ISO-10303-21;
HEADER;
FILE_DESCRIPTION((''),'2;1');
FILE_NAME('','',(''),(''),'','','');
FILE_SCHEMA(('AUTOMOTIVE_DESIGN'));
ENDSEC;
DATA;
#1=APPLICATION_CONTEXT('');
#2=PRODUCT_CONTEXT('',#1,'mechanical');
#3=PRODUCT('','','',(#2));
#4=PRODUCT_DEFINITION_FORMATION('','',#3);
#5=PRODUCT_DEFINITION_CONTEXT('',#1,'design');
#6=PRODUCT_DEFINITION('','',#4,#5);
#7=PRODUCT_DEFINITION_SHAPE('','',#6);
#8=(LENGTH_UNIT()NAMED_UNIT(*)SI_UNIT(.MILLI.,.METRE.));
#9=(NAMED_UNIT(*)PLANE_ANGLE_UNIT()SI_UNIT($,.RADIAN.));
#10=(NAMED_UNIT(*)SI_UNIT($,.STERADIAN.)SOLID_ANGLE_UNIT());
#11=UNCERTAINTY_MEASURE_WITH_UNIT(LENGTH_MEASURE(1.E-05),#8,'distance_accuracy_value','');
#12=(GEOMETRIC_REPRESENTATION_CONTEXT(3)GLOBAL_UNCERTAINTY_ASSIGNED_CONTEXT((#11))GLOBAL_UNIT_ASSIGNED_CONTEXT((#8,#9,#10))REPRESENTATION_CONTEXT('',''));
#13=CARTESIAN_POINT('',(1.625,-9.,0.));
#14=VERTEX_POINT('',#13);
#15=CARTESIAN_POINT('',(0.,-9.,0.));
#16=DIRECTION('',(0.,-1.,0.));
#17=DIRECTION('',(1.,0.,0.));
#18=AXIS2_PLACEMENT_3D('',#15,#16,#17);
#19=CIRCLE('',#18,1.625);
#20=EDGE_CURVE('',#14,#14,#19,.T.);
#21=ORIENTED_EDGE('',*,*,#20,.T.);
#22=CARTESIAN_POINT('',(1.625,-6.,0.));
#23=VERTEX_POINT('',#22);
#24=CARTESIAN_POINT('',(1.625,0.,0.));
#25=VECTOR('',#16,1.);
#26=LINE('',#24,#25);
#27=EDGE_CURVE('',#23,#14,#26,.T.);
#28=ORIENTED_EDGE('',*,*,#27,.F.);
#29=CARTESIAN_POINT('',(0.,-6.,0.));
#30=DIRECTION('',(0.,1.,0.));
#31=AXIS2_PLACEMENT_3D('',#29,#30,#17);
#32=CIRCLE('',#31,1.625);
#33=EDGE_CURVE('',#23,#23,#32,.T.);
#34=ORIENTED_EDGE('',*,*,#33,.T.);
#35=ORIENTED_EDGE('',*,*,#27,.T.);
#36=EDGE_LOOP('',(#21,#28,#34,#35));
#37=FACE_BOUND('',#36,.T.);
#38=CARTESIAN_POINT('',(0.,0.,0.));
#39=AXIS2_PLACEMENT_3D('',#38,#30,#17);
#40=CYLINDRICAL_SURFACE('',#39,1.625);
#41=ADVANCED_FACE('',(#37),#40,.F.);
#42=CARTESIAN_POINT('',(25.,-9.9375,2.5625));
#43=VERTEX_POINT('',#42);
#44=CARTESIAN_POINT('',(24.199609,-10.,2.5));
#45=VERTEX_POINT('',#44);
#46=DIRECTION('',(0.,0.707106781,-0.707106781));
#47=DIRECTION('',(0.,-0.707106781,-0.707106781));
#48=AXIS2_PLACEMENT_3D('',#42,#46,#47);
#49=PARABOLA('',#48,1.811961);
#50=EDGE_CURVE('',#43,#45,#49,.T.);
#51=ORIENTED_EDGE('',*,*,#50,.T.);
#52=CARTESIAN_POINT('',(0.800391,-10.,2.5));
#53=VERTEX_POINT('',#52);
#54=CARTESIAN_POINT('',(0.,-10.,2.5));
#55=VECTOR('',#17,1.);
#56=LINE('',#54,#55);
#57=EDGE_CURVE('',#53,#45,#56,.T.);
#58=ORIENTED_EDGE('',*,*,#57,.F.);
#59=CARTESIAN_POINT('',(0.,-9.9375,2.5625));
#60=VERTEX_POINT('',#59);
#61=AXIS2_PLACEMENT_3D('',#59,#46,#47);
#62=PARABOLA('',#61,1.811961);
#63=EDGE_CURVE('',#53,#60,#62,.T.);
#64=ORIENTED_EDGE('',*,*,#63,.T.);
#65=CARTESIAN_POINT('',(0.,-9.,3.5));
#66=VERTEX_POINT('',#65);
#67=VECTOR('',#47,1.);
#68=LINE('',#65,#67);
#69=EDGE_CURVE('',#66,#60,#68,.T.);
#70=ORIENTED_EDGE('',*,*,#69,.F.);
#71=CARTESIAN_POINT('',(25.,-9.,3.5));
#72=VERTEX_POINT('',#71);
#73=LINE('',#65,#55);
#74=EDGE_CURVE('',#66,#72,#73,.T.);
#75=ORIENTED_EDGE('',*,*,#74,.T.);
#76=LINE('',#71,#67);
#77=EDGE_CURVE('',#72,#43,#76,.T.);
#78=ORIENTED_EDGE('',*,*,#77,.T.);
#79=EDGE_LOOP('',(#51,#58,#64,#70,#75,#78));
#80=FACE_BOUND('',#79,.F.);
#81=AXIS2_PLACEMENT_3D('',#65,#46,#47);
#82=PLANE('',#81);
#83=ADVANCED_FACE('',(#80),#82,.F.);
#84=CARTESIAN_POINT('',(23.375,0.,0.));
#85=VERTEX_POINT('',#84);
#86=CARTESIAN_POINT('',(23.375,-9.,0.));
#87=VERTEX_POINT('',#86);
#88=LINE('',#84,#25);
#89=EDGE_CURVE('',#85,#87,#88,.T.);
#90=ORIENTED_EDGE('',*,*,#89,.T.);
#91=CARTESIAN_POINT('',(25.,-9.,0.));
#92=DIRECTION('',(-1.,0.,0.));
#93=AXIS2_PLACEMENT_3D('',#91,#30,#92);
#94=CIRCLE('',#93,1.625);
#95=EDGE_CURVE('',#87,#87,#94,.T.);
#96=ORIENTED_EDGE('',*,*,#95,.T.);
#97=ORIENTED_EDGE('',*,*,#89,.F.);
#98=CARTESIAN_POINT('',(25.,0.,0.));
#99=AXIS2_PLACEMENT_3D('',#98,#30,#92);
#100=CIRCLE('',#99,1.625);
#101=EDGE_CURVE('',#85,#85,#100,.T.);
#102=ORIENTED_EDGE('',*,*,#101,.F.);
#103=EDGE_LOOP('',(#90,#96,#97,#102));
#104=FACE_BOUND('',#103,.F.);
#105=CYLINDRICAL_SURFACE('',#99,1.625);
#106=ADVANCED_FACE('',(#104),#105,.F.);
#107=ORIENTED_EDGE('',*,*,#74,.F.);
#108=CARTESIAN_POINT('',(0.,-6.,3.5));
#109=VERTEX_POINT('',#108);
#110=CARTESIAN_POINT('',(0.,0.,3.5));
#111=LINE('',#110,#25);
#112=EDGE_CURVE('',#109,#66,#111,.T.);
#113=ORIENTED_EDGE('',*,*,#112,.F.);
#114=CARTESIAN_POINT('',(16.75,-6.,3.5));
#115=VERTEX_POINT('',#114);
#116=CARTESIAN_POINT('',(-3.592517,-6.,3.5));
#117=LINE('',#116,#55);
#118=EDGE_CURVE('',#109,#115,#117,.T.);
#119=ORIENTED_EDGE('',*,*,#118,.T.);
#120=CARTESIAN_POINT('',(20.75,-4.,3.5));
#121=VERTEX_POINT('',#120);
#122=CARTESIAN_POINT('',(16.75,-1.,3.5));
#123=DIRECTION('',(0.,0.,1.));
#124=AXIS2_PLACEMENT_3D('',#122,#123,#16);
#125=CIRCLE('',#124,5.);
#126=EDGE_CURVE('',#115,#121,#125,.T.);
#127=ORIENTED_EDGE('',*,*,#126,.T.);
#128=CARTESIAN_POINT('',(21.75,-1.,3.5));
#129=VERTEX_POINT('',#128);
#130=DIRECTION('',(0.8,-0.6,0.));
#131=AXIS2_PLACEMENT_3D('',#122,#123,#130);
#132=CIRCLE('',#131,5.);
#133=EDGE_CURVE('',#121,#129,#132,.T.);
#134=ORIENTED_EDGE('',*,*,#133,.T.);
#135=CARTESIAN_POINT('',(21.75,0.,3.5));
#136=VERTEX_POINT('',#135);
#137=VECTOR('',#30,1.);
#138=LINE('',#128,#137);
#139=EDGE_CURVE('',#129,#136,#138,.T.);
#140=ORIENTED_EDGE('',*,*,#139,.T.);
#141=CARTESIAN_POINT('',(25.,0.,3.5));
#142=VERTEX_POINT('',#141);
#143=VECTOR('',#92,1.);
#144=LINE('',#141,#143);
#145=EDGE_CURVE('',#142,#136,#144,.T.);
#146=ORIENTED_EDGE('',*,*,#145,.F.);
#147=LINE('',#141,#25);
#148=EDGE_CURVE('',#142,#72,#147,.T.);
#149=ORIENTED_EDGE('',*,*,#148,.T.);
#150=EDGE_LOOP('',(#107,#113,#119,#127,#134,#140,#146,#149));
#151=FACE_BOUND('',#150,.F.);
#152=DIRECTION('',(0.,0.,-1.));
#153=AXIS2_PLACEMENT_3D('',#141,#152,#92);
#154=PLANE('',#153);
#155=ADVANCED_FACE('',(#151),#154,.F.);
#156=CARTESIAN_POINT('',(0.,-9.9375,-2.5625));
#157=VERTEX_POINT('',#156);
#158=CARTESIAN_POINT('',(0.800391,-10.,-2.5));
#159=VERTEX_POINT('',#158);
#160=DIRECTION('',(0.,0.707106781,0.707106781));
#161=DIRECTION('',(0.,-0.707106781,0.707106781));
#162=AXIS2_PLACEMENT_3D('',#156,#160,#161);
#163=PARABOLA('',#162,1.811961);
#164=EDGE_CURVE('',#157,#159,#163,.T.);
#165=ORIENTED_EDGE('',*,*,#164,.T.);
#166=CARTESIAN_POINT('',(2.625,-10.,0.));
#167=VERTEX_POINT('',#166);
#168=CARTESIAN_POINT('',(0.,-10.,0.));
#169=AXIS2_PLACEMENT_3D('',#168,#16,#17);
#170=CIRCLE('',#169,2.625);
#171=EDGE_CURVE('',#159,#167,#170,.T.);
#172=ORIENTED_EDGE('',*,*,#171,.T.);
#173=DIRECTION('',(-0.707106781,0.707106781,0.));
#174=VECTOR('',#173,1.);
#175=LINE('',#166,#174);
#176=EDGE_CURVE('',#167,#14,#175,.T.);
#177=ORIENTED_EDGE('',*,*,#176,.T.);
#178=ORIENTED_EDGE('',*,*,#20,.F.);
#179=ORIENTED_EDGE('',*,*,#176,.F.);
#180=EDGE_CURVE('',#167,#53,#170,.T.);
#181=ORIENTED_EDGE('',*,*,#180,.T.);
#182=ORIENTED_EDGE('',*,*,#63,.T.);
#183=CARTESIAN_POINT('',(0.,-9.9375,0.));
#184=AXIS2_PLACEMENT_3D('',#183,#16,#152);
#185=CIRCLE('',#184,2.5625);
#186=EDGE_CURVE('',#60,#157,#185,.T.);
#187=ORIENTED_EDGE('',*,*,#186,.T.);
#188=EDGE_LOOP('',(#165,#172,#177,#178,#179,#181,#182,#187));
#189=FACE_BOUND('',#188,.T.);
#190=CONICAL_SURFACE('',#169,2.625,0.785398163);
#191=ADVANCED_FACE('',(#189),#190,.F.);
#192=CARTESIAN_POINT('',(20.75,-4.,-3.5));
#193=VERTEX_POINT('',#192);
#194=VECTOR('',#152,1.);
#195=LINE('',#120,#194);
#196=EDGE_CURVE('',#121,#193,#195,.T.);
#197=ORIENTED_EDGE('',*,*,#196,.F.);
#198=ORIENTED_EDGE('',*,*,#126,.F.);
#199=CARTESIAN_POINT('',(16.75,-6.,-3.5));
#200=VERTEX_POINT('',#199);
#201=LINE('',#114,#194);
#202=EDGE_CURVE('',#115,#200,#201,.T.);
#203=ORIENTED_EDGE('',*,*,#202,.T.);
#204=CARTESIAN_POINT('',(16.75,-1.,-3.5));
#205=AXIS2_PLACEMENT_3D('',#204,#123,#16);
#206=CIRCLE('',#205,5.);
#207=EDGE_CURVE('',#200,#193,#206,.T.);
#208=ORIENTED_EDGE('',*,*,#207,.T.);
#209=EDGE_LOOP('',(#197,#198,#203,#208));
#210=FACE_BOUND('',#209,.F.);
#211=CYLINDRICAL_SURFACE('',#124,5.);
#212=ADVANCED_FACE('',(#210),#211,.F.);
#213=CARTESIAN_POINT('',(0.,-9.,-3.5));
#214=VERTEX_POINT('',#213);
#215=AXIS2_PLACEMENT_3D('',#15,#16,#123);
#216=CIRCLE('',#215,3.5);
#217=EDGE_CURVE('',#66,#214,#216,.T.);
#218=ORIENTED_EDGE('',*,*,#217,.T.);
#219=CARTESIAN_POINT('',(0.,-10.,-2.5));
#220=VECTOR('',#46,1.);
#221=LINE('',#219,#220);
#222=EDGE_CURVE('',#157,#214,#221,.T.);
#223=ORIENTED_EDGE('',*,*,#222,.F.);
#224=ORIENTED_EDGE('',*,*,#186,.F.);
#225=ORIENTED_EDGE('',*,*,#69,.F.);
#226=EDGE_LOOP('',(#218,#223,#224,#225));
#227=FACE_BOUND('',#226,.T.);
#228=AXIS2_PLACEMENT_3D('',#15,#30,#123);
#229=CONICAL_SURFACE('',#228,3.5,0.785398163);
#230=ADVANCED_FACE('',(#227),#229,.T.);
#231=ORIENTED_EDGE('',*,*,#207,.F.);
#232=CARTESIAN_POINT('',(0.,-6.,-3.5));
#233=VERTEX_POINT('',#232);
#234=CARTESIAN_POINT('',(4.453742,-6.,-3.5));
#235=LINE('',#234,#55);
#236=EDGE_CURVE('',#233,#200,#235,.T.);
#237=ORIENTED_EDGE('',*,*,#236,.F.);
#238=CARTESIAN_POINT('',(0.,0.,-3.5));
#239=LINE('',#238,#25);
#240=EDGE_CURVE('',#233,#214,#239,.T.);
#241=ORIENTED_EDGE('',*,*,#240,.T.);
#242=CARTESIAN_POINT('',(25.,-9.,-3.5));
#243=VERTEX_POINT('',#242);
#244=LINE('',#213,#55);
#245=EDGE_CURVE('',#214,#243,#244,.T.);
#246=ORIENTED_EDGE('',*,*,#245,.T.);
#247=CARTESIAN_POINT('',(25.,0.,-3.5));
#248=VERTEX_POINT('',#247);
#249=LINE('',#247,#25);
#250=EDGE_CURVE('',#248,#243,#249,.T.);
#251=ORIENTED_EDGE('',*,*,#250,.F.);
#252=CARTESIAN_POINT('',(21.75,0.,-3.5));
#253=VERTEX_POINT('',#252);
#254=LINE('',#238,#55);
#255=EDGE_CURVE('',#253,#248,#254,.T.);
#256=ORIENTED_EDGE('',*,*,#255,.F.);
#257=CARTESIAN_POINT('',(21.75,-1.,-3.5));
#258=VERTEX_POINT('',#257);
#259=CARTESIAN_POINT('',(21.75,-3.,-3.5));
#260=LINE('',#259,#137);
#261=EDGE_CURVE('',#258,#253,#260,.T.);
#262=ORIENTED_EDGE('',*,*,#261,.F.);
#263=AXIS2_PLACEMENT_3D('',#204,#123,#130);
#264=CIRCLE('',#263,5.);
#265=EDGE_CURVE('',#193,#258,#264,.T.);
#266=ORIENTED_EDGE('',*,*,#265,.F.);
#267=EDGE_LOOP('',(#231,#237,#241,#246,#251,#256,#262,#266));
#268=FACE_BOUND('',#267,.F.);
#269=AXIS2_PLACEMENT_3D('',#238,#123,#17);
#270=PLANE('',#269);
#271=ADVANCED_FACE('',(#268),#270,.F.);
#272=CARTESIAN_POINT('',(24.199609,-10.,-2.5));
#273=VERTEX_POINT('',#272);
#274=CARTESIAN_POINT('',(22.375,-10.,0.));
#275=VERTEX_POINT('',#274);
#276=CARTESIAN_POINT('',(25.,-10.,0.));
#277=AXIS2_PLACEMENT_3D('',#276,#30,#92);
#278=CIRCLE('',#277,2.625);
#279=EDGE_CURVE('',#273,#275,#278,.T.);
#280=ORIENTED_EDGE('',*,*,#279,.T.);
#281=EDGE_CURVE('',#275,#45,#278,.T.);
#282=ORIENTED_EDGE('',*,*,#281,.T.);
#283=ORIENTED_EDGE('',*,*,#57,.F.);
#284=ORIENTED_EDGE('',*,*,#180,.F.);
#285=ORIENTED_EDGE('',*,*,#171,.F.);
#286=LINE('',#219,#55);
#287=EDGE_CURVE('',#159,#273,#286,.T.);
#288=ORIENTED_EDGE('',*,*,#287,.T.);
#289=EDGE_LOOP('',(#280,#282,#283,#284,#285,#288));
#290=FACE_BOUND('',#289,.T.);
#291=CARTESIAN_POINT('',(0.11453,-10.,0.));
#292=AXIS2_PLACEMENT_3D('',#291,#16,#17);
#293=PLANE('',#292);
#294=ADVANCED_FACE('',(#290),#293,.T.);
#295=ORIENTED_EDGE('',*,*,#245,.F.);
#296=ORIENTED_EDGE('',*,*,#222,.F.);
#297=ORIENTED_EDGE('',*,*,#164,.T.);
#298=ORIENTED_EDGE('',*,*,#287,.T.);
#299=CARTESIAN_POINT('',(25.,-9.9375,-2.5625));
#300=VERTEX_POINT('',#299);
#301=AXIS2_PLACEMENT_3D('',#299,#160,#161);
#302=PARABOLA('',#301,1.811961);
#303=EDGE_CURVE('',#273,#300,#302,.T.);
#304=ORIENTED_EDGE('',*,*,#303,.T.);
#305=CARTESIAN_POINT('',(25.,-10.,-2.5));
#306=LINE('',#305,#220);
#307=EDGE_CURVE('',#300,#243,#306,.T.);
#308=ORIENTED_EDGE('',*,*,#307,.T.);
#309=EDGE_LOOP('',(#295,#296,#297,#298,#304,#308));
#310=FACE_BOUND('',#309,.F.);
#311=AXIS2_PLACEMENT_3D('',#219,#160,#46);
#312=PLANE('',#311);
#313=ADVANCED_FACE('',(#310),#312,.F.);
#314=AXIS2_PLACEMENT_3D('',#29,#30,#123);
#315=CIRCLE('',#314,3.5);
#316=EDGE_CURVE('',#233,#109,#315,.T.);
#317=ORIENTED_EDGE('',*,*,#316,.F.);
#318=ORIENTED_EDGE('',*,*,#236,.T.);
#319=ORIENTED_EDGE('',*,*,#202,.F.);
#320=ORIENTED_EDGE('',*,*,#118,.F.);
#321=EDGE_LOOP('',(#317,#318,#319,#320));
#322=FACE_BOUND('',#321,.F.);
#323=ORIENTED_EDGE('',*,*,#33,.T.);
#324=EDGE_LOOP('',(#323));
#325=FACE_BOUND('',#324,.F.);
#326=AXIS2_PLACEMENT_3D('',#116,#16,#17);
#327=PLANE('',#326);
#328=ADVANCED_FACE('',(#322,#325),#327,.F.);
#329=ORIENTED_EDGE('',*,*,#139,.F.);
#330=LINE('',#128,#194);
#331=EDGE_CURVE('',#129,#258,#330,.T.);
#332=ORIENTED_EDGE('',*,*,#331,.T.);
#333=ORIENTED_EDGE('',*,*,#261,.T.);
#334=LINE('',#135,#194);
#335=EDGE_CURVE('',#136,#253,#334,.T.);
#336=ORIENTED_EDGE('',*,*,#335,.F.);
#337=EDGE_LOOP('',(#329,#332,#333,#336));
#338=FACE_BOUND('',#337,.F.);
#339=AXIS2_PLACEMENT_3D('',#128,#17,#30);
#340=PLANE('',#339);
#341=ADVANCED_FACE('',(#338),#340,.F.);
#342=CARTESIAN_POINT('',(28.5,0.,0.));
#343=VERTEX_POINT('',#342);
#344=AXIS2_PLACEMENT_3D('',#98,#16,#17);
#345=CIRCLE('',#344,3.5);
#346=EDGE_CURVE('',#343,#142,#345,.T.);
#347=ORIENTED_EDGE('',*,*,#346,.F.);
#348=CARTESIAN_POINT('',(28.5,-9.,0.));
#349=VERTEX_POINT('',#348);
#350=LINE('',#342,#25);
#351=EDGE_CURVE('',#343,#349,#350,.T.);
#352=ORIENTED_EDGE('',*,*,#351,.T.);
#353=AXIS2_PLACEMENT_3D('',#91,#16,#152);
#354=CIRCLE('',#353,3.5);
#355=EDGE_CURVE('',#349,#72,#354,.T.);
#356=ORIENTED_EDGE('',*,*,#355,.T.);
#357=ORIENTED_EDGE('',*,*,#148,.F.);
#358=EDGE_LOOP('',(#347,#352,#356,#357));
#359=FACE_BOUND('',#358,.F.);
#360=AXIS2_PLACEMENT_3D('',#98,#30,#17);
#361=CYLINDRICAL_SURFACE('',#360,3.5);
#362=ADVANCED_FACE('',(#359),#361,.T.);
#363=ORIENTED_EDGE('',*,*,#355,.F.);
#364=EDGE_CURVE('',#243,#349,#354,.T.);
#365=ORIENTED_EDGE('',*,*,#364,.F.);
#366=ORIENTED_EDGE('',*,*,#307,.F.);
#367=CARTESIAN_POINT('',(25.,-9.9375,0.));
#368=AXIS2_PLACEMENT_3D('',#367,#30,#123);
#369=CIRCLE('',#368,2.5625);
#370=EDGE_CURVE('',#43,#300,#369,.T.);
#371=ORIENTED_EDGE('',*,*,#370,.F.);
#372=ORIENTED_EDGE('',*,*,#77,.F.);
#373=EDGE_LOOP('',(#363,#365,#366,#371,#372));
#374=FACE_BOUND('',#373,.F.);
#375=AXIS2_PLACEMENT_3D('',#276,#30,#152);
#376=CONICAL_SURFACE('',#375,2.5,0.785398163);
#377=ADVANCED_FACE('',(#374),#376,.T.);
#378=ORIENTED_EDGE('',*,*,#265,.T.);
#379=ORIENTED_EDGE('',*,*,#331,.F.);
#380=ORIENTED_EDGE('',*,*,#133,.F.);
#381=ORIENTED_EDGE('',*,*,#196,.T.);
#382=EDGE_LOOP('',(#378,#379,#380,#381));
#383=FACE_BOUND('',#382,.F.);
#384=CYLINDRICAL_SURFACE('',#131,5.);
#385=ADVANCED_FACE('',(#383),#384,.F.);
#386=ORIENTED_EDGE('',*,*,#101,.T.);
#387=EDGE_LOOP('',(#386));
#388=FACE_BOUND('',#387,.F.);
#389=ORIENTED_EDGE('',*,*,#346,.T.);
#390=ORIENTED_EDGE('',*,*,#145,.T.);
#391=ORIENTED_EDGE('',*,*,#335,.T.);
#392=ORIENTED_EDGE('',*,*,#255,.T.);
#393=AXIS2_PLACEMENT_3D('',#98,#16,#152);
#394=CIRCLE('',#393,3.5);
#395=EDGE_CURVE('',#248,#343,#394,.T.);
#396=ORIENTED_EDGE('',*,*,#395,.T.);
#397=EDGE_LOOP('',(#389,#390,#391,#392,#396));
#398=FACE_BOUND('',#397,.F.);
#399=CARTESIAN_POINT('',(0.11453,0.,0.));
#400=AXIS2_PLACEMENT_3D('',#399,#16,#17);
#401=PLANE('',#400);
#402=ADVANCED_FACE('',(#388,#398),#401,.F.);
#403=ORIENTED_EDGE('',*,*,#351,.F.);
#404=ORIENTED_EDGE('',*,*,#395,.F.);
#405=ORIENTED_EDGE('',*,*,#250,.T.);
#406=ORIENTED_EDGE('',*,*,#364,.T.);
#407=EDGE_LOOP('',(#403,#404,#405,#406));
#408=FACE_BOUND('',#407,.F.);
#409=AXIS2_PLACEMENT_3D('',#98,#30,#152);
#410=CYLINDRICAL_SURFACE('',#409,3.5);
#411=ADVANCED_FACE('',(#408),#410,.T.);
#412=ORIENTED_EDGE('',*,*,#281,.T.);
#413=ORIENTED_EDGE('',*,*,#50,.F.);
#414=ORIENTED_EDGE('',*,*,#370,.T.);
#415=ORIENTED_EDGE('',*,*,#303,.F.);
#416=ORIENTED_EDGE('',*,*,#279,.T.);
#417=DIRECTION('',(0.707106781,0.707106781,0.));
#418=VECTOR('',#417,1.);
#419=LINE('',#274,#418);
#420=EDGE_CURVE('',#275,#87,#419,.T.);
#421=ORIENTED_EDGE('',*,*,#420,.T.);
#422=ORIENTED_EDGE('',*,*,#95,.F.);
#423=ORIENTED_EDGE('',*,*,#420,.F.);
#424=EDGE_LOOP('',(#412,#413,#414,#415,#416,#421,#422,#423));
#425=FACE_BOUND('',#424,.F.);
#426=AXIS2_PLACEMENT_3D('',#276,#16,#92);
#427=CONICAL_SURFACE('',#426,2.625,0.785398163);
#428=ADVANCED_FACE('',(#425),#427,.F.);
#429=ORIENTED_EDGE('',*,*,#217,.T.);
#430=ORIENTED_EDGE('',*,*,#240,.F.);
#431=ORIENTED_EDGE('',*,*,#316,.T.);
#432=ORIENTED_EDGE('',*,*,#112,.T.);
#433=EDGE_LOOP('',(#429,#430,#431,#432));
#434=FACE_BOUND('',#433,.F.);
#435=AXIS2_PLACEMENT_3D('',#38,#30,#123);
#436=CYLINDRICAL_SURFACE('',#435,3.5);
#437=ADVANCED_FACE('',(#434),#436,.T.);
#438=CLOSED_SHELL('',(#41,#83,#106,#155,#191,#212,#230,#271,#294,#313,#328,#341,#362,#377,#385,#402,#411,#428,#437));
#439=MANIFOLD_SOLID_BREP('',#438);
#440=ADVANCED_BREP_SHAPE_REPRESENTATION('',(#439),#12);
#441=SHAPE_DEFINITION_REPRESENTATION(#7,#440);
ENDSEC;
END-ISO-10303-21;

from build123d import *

# Parameters (mm, degrees)
F0_R        = 1.625
F1_DEPTH    = 10
F2_W        = 7.875
F2_H        = 2
F2_H_2      = 4
F2_W_2      = 3.5925165284
F1_FACE1_W  = 25
F1_FACE1_H  = 10
F3_DEPTH    = 25
F4_T1_DEPTH = 25
F4_T4_ANGLE = 180
F4_T6_ANGLE = 180


# Not quite as in the source:
# - a fillet or chamfer that OpenCascade refuses, or shapes differently, is made with other operations: its cross-section is extruded or revolved along the edge and cut away or added


with BuildPart() as f1:
    # F0 (on Front) → F1 (new body)
    with BuildSketch(Plane.XZ):
        with BuildLine():
            ThreePointArc((0, -3.5), (2.4748737342, -2.4748737342), (3.5, 0))
            ThreePointArc((3.5, 0), (2.4748737342, 2.4748737342), (0, 3.5))
            ThreePointArc((0, 3.5), (-3.5, 0), (0, -3.5))
        make_face()
        Circle(F0_R, mode=Mode.SUBTRACT)
        with BuildLine():
            ThreePointArc((0, 3.5), (2.4748737342, 2.4748737342), (3.5, 0))
            Line((3.5, 0), (21.5, 0))
            ThreePointArc((21.5, 0), (22.5251262658, 2.4748737342), (25, 3.5))
            Line((25, 3.5), (0, 3.5))
        make_face()
        with BuildLine():
            Line((21.5, 0), (3.5, 0))
            ThreePointArc((3.5, 0), (2.4748737342, -2.4748737342), (0, -3.5))
            Line((0, -3.5), (25, -3.5))
            ThreePointArc((25, -3.5), (22.5251262658, -2.4748737342), (21.5, 0))
        make_face()
        with BuildLine():
            ThreePointArc((25, 3.5), (22.5251262658, 2.4748737342), (21.5, 0))
            ThreePointArc((21.5, 0), (22.5251262658, -2.4748737342), (25, -3.5))
            ThreePointArc((25, -3.5), (27.4748737342, -2.4748737342), (28.5, 0))
            ThreePointArc((28.5, 0), (27.4748737342, 2.4748737342), (25, 3.5))
        make_face()
        with BuildLine():
            ThreePointArc((26.625, 0), (25, -1.625), (23.375, 0))
            ThreePointArc((23.375, 0), (25, 1.625), (26.625, 0))
        make_face(mode=Mode.SUBTRACT)
    extrude(amount=F1_DEPTH)

    # F2 (on face) + F1_face1 (on face) → F3 (cut)
    with BuildSketch(Plane.XY.offset(3.5)):
        with Locations((3.9375, -5)):
            Rectangle(F2_W, F2_H)
        with Locations((3.9375, -2)):
            Rectangle(F2_W, F2_H_2)
        with Locations((11.8125, -5)):
            Rectangle(F2_W, F2_H)
        with Locations((-1.7962582642, -2)):
            Rectangle(F2_W_2, F2_H_2)
        with Locations((-1.7962582642, -5)):
            Rectangle(F2_W_2, F2_H)
        with Locations((11.8125, -2)):
            Rectangle(F2_W, F2_H_2)
        with BuildLine():
            Line((21.75, 0), (15.75, 0))
            Line((15.75, 0), (15.75, -4))
            Line((15.75, -4), (20.75, -4))
            ThreePointArc((20.75, -4), (21.4934164903, -2.5811388301), (21.75, -1))
            Line((21.75, -1), (21.75, 0))
        make_face()
        with BuildLine():
            Line((20.75, -4), (15.75, -4))
            Line((15.75, -4), (15.75, -6))
            Line((15.75, -6), (16.75, -6))
            ThreePointArc((16.75, -6), (18.9860679775, -5.472135955), (20.75, -4))
        make_face()
    with BuildSketch(Plane(origin=(12.5, -5, -3.5), x_dir=(1, 0, 0), z_dir=(0, 0, -1))):
        Rectangle(F1_FACE1_W, F1_FACE1_H)
    extrude(amount=-F3_DEPTH, dir=(0, 0, 1), mode=Mode.SUBTRACT)

    # F4: chamfer of 1 on 6 edges, made by hand

    # F4_s2 → F4_t1 (cut)
    with BuildSketch(Plane.YZ):
        Polygon((-9, 3.5), (-10, 2.5), (-10, 3.5), align=None)
        Polygon((-10, -2.5), (-9, -3.5), (-10, -3.5), align=None)
    extrude(amount=F4_T1_DEPTH, mode=Mode.SUBTRACT)

    # F4_s3 → F4_t4 (revolve, cut)
    with BuildSketch(Plane.YZ):
        Polygon((-9, 3.5), (-10, 2.5), (-10, 3.5), align=None)
    revolve(axis=Axis((0, -10, 0), (0, -1, 0)), revolution_arc=F4_T4_ANGLE, mode=Mode.SUBTRACT)

    # F4_s5 → F4_t6 (revolve, cut)
    with BuildSketch(Plane.YZ.offset(25)):
        Polygon((-10, -2.5), (-9, -3.5), (-10, -3.5), align=None)
    revolve(axis=Axis((25, -10, 0), (0, -1, 0)), revolution_arc=F4_T6_ANGLE, mode=Mode.SUBTRACT)

    # F4_s7 → F4_t8 (revolve, cut)
    with BuildSketch(Plane.XY):
        Polygon((2.625, -10), (1.625, -9), (1.625, -10), align=None)
    revolve(axis=Axis((0, -10, 0), (0, -1, 0)), mode=Mode.SUBTRACT)

    # F4_s9 → F4_t10 (revolve, cut)
    with BuildSketch(Plane.XY):
        Polygon((22.375, -10), (23.375, -9), (23.375, -10), align=None)
    revolve(axis=Axis((25, -10, 0), (0, 1, 0)), mode=Mode.SUBTRACT)


solid = f1.part
